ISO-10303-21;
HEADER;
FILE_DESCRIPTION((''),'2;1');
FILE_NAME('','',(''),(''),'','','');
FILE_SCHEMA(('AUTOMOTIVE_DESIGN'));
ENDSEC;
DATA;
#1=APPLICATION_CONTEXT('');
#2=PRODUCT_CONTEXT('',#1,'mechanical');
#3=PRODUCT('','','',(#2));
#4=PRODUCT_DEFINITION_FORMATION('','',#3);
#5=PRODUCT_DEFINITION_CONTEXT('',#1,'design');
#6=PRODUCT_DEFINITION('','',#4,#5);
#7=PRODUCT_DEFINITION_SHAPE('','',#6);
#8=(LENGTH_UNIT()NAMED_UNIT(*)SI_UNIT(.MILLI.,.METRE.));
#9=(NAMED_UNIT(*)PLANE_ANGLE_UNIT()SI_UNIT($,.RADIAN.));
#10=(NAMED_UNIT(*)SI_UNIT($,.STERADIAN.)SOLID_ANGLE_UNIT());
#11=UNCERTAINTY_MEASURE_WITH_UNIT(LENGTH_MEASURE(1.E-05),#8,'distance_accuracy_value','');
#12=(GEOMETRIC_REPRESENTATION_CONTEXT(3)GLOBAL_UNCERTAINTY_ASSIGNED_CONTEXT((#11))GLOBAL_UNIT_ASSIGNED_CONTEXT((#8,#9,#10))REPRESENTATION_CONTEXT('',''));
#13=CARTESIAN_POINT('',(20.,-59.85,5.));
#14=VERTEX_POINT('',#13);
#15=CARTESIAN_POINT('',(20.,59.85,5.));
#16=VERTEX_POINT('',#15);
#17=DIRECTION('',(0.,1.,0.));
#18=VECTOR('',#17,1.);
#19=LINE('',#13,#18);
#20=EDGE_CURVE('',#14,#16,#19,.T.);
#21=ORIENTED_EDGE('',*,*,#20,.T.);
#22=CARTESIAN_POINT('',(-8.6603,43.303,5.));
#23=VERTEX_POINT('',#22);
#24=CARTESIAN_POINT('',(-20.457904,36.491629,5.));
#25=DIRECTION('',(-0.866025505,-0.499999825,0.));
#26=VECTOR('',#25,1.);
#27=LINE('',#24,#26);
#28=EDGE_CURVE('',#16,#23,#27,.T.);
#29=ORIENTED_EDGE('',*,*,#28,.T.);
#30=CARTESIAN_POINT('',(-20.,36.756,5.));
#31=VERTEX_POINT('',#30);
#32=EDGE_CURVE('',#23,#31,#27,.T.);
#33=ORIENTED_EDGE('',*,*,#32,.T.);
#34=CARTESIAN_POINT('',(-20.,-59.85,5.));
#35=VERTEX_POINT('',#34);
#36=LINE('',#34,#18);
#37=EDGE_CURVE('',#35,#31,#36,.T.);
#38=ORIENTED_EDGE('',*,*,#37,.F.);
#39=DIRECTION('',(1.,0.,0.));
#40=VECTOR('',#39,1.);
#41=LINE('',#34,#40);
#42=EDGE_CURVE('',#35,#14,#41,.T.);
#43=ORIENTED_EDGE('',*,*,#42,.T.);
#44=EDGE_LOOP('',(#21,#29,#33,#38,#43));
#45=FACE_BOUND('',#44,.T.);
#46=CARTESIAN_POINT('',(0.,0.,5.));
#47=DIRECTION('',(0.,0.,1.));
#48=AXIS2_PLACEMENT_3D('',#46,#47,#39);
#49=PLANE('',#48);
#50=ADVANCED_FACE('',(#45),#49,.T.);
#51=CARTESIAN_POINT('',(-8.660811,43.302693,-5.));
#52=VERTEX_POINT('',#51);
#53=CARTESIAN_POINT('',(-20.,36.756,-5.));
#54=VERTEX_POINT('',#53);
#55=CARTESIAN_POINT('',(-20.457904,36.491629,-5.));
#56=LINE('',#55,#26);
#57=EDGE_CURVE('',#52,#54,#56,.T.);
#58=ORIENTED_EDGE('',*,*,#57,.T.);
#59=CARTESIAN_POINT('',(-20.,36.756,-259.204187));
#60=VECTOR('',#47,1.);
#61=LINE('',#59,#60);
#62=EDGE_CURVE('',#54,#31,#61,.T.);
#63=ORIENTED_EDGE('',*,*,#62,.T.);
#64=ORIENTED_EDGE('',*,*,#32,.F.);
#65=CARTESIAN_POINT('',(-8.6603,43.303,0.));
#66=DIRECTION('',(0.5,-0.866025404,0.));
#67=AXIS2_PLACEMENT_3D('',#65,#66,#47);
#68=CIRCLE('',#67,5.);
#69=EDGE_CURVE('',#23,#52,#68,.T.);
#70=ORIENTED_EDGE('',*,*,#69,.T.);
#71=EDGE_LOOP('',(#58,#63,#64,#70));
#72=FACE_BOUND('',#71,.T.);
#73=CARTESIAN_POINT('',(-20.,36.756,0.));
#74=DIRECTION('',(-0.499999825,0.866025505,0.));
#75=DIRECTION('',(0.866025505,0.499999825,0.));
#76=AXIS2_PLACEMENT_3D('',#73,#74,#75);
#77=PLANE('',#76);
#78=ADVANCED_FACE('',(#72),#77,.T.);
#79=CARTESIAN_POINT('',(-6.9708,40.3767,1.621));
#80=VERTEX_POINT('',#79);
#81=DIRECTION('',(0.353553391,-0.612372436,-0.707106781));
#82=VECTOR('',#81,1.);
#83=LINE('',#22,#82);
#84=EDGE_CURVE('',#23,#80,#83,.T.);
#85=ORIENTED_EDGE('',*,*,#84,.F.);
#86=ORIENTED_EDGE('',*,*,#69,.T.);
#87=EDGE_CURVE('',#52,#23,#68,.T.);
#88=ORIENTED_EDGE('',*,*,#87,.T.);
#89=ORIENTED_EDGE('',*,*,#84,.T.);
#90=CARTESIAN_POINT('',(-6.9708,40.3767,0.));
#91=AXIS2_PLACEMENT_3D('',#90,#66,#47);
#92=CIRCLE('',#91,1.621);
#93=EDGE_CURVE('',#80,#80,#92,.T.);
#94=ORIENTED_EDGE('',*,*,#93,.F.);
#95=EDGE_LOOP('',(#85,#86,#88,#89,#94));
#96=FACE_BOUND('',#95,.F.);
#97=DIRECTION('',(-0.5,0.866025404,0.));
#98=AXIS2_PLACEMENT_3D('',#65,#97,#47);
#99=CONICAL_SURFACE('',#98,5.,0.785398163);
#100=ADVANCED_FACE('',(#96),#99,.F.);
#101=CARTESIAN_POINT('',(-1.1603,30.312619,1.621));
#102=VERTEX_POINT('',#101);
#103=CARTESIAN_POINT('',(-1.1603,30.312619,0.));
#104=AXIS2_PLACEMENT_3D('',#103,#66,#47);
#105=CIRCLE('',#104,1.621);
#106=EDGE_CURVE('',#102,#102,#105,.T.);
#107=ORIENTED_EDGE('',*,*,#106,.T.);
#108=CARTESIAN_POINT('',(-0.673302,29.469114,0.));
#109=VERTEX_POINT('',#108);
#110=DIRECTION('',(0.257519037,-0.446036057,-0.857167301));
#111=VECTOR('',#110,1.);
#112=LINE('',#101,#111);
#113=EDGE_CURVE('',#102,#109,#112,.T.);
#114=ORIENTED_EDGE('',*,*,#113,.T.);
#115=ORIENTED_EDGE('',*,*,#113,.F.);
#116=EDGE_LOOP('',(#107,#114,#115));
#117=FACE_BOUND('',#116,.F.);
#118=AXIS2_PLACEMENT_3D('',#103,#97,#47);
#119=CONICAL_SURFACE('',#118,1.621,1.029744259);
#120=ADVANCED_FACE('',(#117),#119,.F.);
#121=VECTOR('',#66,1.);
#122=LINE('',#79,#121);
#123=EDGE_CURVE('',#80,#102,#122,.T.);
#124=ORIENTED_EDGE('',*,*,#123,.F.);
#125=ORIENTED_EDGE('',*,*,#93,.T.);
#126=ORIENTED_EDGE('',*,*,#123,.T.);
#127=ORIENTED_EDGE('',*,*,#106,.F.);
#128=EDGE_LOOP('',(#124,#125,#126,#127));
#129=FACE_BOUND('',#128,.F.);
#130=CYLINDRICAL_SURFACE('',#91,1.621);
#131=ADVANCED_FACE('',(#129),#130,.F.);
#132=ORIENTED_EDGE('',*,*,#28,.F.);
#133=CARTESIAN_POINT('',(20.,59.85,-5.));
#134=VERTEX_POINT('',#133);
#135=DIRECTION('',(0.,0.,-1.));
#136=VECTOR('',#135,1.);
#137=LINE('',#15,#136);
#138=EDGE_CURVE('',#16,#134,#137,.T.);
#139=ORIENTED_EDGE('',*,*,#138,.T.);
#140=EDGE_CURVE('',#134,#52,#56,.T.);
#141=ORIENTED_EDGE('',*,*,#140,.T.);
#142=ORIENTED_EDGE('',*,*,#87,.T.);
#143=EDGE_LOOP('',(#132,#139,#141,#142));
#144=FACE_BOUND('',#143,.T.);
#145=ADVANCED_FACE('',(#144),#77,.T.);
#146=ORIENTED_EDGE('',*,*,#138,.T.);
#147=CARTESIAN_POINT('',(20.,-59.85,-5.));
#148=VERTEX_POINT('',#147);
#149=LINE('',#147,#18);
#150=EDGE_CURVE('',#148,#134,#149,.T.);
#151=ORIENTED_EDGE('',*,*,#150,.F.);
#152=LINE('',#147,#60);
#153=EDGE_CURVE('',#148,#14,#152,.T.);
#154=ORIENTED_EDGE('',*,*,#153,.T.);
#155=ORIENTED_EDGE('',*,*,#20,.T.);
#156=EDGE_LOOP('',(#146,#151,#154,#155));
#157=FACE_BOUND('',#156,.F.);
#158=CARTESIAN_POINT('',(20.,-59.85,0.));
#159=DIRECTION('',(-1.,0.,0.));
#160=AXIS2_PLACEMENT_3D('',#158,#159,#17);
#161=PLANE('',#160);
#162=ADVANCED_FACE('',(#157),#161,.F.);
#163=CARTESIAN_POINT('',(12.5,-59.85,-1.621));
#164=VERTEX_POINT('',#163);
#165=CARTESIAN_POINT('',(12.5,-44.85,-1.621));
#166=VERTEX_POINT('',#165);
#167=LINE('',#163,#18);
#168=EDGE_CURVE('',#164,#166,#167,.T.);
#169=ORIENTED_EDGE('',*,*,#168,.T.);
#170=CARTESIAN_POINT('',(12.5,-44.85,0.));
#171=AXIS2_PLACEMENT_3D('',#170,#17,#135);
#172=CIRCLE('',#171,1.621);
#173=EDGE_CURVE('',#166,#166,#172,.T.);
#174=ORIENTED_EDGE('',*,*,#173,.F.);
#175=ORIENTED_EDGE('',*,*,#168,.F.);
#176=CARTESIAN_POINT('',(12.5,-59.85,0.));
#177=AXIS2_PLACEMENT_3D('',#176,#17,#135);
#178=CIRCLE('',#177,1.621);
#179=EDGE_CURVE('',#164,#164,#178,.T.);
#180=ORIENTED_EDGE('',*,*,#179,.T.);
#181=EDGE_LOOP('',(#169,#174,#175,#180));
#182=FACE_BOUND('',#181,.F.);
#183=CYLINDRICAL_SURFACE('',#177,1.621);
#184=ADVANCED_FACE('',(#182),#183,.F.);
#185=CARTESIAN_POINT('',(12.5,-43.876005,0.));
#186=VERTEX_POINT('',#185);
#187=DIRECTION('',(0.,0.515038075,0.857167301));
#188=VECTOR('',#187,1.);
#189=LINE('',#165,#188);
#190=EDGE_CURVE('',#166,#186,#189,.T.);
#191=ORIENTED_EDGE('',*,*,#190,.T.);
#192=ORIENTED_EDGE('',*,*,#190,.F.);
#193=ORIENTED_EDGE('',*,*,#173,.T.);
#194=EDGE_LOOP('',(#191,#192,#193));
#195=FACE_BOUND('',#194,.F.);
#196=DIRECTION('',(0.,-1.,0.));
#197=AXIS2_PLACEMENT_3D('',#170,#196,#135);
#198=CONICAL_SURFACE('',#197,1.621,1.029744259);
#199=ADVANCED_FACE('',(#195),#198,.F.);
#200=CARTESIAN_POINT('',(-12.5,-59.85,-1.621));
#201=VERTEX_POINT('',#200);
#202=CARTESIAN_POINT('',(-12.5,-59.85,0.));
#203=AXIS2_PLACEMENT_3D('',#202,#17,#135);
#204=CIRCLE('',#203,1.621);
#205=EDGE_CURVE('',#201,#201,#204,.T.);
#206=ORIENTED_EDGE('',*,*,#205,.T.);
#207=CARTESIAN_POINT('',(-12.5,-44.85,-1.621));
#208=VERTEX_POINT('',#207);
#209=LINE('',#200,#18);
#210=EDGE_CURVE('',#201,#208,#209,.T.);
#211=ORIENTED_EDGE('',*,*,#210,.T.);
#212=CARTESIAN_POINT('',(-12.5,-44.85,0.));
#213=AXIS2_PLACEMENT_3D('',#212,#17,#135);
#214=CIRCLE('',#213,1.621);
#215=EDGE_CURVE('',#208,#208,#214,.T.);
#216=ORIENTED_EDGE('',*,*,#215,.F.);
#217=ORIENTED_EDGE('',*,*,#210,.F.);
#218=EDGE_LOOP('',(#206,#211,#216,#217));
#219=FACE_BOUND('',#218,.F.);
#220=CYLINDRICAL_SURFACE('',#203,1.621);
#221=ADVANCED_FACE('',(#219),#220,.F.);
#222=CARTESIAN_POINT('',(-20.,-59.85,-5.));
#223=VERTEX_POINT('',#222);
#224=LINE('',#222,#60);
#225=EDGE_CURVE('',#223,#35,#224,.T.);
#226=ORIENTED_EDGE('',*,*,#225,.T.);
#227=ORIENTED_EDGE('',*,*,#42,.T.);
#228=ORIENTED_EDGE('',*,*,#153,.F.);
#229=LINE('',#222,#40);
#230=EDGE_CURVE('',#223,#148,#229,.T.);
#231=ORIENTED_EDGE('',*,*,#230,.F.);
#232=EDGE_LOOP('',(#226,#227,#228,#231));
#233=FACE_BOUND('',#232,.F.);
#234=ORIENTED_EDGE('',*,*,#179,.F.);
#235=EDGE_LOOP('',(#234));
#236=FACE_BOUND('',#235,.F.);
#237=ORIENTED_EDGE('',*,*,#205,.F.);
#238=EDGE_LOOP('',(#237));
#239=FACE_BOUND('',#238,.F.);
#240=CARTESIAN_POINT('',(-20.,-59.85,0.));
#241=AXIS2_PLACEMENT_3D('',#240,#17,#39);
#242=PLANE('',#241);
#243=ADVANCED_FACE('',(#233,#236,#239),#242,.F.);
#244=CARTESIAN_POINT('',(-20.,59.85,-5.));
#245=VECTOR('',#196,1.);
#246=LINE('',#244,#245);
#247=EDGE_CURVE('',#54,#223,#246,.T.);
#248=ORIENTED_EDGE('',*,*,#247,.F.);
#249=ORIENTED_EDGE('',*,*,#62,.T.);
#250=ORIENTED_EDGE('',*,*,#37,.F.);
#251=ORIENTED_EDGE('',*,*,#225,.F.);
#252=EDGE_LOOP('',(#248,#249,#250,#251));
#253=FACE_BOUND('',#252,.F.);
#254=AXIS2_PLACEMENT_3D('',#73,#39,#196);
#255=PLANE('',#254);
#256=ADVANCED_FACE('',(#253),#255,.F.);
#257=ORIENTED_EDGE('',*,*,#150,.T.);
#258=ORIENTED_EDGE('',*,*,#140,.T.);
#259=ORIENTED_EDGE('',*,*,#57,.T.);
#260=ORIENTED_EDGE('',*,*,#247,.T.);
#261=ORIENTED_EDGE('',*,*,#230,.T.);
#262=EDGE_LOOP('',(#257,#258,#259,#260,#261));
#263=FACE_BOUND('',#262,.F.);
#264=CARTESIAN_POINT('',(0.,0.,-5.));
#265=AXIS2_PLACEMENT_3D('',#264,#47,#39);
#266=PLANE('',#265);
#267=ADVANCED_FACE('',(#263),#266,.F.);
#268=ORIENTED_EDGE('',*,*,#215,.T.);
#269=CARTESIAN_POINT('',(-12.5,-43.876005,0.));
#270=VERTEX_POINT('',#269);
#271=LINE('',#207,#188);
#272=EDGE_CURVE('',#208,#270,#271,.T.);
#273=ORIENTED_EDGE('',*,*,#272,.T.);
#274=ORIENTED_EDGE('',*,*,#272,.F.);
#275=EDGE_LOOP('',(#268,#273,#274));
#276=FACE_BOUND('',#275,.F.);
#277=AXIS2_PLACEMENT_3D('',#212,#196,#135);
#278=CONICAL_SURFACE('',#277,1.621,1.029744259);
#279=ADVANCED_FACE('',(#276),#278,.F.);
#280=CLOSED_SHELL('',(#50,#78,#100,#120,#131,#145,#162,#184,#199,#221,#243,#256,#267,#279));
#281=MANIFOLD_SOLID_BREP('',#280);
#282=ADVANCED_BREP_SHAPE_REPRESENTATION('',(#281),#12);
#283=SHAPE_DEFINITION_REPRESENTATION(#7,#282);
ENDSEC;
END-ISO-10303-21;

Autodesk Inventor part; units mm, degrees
ref_plane "YZ Plane" through (0, 0, 0) normal (1, 0, 0) x (0, 1, 0)
ref_plane "XZ Plane" through (0, 0, 0) normal (0, 1, 0) x (-1, 0, 0)
ref_plane "XY Plane" through (0, 0, 0) normal (0, 0, 1) x (1, 0, 0)
sketch "Esboço1" plane through (0, 0, 0) normal (0, 0, 1) x (1, 0, 0)
  line L0 (-20, -59.85) -> (20, -59.85)
  line L1 (20, -59.85) -> (20, 59.85)
  line L2 (20, 59.85) -> (-20, 59.85)
  line L3 (-20, 59.85) -> (-20, -59.85)
  line L4 (-20, 59.85) -> (20, 59.85)
  circle A0 centre (0, 49.85) radius 5 construction
  circle A1 centre (0, 49.85) radius 28 construction
  circle A2 centre (0, 49.85) radius 74 construction
  line L5 (-20, 30.2541) -> (20, 30.2541) construction
  line L6 (-20, -24.15) -> (20, -24.15) construction
  line L7 (-103.6, 0) -> (103.6, 0) construction
  line L8 (0, -96.59) -> (0, 160.59) construction
  line L9 (-20, 36.756) -> (20, 59.85)
  point P0 (0, 0)
  dimension "d0" = 119.7
  dimension "d1" = 40
  dimension "d41" = 10
  dimension "d42" = 109.7
  dimension "d43" = 56
  dimension "d45" = 84
  dimension "d49" = 30
  dimension "d58" = 10
extrude "Extrusão1" add sketch "Esboço1" along normal mid plane 10
extrude "Extrusão4" cut sketch "Esboço1" along normal through all both and the other way through all contours L3 L2 L9
sketch "Esboço2" plane through (-20, -59.85, -5) normal (0, -1, 0) x (1, 0, 0)
  line L0 (40, 10) -> (40, 0)
  line L1 (40, 5) -> (0, 5) construction
  line L2 (0, 0) -> (0, 10)
  line L3 (0, 0) -> (0, 10) projected
  line L4 (40, 0) -> (40, 10) projected
  line L5 (0, 10) -> (40, 10) construction
  line L6 (20, 10) -> (20, 0) construction
  line L7 (40, 0) -> (0, 0) construction
  point P0 (20, 5)
  point P1 (7.5, 5)
  point P2 (32.5, 5)
  dimension "d9" = 7.5
  dimension "d10" = 7.5
  dimension "d37" = 25
hole "Furo1" at (-12.5, -59.85, 0) at (12.5, -59.85, 0) direction (0, 1, 0) diameter 3.242 depth 15 tip angle 118 thread size "M4x0.7" class "6H" standard "ISO Metric profile"
sketch "Esboço3" plane through (0, 0, 5) normal (0, 0, 1) x (1, 0, 0)
  point P0 (0, 0)
  point P1 (0, 37.5)
  point P2 (0, 49.85)
hole "Furo2" [suppressed]
sketch "Esboço6" plane through (20, 59.85, 5) normal (-0.5, 0.8660254, 0) x (0.8660254, 0.5, 0)
  line L0 (0, 0) -> (0, 10) construction
  line L1 (0, 5) -> (-46.188, 5) construction
  line L2 (-46.188, 0) -> (-46.188, 10) construction
  line L3 (-23.094, 5) -> (-23.094, 0) construction
  point P0 (-47.2455, 5)
  point P1 (-33.094, 5)
  point P2 (-13.094, 5)
  dimension "d50" = 20
hole "Furo3" at (-8.6603, 43.303, 0) direction (0.5, -0.8660254, 0) diameter 3.242 depth 15 tip angle 118 countersink diameter 10 countersink angle 90 thread size "M4x0.7" class "6H" standard "ISO Metric profile"
properties part number "GRJ-03-116A" material "Fenolite OR"
